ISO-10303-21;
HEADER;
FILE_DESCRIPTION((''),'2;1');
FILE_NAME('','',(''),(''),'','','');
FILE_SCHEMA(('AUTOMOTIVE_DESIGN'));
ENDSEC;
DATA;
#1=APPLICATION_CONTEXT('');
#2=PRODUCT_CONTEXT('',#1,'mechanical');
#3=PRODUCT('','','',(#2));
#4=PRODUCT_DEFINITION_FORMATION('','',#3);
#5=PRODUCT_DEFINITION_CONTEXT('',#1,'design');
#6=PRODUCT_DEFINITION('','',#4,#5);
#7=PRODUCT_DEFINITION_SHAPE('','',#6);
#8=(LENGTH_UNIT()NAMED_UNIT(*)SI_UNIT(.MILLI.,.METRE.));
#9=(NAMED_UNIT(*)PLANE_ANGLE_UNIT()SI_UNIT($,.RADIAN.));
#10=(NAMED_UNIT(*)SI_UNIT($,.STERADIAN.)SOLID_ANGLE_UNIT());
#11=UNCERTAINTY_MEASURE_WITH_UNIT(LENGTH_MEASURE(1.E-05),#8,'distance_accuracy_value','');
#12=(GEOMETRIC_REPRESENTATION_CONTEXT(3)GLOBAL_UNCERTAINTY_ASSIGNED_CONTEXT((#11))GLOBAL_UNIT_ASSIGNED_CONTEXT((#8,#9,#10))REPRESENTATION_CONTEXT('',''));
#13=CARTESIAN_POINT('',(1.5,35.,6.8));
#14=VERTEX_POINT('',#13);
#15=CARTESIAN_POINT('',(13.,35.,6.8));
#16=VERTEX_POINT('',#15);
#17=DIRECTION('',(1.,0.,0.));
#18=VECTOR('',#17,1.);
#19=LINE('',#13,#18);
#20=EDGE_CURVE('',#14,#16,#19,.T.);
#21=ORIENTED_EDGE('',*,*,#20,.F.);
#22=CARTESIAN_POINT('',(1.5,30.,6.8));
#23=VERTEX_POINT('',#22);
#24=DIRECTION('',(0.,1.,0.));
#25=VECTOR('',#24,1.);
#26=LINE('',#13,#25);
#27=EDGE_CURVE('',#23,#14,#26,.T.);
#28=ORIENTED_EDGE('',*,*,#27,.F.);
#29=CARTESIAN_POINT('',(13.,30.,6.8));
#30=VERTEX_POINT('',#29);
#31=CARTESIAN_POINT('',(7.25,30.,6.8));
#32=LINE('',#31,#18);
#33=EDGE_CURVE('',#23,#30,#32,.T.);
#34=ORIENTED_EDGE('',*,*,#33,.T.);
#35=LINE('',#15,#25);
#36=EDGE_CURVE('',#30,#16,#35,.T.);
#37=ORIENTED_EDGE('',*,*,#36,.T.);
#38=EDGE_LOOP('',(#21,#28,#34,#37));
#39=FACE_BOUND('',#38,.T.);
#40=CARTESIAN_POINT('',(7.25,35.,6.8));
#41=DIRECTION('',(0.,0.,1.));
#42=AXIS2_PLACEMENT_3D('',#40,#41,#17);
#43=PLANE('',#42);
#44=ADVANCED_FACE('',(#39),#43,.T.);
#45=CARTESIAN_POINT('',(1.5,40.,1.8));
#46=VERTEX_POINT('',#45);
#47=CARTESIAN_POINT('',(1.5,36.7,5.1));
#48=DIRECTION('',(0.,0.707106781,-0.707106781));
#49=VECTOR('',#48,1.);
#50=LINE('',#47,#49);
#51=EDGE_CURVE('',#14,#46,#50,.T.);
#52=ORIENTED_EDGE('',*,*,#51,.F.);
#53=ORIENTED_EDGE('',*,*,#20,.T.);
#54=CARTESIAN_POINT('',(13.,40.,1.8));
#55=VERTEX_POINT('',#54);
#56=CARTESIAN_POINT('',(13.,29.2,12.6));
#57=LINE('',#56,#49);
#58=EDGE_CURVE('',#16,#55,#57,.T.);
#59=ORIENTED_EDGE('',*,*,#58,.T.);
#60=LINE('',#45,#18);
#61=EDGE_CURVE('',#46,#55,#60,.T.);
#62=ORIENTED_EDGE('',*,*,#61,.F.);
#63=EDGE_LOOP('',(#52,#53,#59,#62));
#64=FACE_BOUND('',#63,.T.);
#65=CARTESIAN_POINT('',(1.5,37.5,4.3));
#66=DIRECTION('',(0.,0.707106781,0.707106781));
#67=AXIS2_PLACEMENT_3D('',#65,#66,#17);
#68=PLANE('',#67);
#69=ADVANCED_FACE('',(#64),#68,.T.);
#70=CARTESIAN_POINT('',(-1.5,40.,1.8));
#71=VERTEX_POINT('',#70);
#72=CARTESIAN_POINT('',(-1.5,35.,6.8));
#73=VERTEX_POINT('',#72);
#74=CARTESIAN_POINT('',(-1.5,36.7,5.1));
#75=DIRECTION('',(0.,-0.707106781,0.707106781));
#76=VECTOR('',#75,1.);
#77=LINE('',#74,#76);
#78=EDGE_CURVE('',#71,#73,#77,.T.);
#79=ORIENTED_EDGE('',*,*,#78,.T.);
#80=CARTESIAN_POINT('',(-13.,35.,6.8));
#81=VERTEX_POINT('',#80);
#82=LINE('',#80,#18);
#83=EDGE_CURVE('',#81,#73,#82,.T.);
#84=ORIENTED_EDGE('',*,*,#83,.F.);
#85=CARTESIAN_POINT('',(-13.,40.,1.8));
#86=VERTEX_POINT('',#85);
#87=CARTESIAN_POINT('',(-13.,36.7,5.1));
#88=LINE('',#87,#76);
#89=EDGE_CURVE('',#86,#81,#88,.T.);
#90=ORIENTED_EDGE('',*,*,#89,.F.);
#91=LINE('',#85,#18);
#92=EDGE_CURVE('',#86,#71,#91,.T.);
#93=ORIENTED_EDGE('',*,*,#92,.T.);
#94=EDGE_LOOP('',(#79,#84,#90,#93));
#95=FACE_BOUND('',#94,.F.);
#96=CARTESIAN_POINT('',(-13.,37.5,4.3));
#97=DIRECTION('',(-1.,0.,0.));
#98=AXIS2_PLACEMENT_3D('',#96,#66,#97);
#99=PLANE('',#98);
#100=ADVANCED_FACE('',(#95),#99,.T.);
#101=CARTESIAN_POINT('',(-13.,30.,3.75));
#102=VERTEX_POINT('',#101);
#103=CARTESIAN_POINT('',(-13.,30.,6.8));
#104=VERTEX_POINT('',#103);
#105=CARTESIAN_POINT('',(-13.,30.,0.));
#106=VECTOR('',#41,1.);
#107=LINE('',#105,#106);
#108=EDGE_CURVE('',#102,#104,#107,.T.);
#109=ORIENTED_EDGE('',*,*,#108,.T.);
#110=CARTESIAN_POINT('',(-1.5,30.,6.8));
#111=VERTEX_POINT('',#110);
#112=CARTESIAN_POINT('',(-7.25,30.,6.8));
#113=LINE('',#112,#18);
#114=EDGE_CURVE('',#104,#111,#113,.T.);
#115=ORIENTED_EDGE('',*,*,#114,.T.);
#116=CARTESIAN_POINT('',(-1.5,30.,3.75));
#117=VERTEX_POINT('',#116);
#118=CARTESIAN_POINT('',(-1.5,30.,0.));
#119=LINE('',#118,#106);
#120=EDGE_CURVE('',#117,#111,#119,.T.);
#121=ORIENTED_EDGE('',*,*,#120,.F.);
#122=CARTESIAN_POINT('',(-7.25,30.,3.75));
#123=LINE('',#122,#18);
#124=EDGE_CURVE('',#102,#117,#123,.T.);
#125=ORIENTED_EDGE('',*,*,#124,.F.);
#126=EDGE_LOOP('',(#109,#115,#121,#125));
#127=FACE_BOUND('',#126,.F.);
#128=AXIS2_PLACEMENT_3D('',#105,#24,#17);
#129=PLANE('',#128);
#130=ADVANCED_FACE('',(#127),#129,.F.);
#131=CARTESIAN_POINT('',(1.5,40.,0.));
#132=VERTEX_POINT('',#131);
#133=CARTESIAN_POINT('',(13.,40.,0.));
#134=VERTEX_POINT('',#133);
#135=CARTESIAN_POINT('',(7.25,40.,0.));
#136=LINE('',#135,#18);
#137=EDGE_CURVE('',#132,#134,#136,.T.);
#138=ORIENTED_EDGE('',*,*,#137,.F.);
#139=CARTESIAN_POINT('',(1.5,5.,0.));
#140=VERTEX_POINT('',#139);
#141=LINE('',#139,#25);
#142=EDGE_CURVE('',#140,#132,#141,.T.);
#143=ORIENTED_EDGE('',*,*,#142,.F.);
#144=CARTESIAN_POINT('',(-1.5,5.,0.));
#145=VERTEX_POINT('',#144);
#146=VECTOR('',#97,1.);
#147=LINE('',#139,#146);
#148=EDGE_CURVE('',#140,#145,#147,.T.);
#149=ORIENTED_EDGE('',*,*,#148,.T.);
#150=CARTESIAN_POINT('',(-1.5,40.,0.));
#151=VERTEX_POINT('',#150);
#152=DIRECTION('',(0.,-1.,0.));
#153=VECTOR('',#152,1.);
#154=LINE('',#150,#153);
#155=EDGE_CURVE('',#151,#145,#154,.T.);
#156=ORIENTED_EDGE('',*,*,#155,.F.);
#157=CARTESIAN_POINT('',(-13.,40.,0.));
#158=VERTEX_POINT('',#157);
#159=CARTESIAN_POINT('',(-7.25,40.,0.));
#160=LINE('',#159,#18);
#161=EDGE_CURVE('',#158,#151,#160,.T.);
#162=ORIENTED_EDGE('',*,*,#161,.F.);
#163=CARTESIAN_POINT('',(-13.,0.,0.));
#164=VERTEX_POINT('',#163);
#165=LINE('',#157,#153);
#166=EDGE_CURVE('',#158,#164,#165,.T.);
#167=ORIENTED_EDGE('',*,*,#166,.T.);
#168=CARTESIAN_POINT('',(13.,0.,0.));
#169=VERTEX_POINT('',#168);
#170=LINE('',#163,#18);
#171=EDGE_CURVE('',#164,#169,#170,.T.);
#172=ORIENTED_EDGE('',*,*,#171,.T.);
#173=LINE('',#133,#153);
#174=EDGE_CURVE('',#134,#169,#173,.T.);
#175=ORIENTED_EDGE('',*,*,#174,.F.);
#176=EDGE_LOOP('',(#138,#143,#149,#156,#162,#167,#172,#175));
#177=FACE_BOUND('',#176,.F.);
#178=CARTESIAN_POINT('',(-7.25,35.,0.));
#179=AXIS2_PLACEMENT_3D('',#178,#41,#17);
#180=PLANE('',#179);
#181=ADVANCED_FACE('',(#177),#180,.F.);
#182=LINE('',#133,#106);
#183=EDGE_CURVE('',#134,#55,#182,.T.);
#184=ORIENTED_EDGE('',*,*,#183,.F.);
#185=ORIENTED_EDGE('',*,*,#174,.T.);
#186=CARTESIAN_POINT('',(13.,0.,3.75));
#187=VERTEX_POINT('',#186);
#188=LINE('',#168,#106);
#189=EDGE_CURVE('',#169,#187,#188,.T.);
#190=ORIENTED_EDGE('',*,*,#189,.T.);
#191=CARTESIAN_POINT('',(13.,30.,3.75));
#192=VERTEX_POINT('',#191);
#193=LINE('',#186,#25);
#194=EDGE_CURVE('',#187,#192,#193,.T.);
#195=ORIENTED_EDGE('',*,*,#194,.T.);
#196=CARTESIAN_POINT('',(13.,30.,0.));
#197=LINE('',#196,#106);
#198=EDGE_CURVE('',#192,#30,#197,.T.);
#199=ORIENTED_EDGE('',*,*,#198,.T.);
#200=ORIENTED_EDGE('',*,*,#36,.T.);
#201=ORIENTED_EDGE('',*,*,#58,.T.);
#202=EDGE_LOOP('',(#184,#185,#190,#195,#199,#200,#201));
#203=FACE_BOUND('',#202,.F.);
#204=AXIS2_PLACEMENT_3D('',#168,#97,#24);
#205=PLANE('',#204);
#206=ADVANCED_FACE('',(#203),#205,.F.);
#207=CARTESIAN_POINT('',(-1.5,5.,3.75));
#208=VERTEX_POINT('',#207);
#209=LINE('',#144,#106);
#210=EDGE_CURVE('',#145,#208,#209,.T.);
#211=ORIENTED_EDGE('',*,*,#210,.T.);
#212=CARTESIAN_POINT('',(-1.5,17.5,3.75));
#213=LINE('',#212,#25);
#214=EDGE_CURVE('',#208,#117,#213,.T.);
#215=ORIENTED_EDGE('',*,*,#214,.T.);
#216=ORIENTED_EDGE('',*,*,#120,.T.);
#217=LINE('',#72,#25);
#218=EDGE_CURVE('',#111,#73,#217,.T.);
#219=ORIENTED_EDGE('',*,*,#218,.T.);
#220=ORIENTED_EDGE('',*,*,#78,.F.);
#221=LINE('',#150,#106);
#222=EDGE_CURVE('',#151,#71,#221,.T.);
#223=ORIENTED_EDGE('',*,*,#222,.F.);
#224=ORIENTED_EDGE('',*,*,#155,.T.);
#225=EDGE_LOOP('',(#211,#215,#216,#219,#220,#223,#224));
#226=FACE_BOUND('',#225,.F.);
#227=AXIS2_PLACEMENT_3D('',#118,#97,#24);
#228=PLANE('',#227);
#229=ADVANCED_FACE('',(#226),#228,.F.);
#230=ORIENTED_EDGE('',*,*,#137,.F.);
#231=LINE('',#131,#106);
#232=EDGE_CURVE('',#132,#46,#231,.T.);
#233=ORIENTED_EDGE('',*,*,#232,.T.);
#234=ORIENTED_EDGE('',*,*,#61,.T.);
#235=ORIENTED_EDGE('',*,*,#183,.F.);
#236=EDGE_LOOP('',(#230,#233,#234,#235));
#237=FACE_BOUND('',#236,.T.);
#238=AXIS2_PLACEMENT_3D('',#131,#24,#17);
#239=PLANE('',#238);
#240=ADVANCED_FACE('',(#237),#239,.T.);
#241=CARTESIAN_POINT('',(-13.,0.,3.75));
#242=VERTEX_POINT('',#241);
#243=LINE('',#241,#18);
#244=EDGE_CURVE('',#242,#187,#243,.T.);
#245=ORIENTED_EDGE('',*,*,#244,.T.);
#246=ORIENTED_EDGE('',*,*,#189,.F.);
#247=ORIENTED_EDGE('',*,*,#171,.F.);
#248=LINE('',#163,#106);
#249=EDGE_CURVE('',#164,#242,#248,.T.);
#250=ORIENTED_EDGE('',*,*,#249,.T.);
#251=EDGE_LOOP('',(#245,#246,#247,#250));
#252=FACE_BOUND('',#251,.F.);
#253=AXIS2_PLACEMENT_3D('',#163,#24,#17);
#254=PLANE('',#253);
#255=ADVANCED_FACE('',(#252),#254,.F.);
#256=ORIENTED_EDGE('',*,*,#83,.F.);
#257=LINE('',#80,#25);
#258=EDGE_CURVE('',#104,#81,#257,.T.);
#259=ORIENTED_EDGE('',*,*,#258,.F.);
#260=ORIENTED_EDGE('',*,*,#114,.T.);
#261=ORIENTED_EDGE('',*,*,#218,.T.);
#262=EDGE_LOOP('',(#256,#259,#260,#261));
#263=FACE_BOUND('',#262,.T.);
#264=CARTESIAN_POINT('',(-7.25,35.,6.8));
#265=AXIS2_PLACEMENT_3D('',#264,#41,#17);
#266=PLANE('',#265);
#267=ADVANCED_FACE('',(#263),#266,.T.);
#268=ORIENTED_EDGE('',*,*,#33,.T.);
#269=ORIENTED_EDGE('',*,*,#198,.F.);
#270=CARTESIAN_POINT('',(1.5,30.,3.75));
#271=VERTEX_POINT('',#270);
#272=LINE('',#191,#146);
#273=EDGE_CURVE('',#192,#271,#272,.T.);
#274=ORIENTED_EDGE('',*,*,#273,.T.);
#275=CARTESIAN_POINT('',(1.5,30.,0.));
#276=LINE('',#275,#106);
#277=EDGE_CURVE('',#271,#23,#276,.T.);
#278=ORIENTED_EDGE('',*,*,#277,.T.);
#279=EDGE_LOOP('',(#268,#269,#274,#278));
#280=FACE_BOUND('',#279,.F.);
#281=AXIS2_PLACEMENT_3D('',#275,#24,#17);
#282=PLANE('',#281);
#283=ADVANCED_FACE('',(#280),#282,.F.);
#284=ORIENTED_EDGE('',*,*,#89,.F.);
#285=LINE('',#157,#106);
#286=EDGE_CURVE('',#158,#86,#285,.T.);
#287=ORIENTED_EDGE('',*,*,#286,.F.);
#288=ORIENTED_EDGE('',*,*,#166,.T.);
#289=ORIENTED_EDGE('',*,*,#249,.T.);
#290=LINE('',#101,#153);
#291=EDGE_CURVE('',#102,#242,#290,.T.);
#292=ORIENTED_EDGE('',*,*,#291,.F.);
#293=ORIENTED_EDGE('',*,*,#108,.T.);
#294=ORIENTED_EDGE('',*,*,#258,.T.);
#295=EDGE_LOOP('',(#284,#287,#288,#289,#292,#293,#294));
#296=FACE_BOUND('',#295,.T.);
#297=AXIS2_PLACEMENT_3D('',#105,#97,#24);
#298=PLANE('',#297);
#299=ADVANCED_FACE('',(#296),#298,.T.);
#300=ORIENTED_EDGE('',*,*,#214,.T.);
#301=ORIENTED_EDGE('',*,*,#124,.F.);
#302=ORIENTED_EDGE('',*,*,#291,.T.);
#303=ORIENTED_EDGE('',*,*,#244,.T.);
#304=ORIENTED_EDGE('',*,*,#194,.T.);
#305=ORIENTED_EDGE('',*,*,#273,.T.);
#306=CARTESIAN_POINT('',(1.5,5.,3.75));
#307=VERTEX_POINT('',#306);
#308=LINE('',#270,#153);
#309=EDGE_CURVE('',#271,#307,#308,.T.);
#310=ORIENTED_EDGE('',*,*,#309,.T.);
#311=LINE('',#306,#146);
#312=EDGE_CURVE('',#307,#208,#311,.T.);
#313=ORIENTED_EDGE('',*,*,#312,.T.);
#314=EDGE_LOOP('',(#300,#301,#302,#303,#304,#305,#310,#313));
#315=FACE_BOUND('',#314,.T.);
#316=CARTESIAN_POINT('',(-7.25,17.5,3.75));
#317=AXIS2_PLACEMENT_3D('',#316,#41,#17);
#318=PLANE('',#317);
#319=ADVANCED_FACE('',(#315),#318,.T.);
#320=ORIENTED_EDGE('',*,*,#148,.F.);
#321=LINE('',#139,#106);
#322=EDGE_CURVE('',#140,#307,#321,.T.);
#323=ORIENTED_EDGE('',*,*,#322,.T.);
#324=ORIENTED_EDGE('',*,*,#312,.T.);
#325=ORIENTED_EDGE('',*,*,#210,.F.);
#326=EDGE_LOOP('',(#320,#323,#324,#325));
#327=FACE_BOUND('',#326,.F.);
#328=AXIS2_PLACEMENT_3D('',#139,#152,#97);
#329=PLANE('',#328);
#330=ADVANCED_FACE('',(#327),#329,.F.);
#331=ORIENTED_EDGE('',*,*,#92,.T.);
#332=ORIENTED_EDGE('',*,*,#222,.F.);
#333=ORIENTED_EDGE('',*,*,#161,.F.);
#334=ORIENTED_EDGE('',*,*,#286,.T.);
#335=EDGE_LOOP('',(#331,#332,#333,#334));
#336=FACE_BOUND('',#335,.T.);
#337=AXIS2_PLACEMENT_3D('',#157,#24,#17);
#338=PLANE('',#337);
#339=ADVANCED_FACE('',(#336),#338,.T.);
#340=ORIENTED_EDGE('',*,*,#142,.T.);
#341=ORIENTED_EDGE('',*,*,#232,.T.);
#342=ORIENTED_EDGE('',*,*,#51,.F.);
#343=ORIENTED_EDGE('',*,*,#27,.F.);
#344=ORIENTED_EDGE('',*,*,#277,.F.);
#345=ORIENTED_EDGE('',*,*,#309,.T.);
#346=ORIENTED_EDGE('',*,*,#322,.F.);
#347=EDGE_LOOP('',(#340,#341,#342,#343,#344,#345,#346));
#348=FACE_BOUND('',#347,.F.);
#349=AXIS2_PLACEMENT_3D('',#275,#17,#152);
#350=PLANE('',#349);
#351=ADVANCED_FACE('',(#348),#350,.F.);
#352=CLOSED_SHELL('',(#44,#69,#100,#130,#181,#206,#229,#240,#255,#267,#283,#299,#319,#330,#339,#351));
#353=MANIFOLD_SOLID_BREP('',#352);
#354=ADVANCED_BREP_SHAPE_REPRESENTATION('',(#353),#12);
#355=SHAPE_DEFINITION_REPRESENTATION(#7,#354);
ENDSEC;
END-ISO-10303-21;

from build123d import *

# Parameters (mm, degrees)
F0_W     = 11.5
F0_H     = 25
F0_W_2   = 1.5
F0_H_2   = 5
F1_DEPTH = 3.75
F0_H_3   = 10
F2_DEPTH = 6.8
F3_SIZE  = 5


with BuildPart() as f1:
    # F0 (on Top) → F1 (new body)
    with BuildSketch(Plane.XY):
        with Locations((-7.25, 17.5)):
            Rectangle(F0_W, F0_H)
        Polygon((1.5, 30), (1.5, 5), (13, 4.9315184347), (13, 30), align=None)
        Polygon((1.5, 5), (1.5, 0), (13, 0), (13, 4.9315184347), align=None)
        with Locations((0.75, 2.5)):
            Rectangle(F0_W_2, F0_H_2)
        with Locations((-0.75, 2.5)):
            Rectangle(F0_W_2, F0_H_2)
        with Locations((-7.25, 2.5)):
            Rectangle(F0_W, F0_H_2)
    extrude(amount=F1_DEPTH)

    # F0 (on Top) → F2 (join)
    with BuildSketch(Plane.XY):
        with Locations((-7.25, 35)):
            Rectangle(F0_W, F0_H_3)
        with Locations((7.25, 35)):
            Rectangle(F0_W, F0_H_3)
    extrude(amount=F2_DEPTH)

    # F3
    f3_edges = [f1.edges().sort_by_distance(p)[0] for p in [
        (-7.25, 40, 6.8),
        (7.25, 40, 6.8),
    ]]
    chamfer(f3_edges, length=F3_SIZE)


solid = f1.part
